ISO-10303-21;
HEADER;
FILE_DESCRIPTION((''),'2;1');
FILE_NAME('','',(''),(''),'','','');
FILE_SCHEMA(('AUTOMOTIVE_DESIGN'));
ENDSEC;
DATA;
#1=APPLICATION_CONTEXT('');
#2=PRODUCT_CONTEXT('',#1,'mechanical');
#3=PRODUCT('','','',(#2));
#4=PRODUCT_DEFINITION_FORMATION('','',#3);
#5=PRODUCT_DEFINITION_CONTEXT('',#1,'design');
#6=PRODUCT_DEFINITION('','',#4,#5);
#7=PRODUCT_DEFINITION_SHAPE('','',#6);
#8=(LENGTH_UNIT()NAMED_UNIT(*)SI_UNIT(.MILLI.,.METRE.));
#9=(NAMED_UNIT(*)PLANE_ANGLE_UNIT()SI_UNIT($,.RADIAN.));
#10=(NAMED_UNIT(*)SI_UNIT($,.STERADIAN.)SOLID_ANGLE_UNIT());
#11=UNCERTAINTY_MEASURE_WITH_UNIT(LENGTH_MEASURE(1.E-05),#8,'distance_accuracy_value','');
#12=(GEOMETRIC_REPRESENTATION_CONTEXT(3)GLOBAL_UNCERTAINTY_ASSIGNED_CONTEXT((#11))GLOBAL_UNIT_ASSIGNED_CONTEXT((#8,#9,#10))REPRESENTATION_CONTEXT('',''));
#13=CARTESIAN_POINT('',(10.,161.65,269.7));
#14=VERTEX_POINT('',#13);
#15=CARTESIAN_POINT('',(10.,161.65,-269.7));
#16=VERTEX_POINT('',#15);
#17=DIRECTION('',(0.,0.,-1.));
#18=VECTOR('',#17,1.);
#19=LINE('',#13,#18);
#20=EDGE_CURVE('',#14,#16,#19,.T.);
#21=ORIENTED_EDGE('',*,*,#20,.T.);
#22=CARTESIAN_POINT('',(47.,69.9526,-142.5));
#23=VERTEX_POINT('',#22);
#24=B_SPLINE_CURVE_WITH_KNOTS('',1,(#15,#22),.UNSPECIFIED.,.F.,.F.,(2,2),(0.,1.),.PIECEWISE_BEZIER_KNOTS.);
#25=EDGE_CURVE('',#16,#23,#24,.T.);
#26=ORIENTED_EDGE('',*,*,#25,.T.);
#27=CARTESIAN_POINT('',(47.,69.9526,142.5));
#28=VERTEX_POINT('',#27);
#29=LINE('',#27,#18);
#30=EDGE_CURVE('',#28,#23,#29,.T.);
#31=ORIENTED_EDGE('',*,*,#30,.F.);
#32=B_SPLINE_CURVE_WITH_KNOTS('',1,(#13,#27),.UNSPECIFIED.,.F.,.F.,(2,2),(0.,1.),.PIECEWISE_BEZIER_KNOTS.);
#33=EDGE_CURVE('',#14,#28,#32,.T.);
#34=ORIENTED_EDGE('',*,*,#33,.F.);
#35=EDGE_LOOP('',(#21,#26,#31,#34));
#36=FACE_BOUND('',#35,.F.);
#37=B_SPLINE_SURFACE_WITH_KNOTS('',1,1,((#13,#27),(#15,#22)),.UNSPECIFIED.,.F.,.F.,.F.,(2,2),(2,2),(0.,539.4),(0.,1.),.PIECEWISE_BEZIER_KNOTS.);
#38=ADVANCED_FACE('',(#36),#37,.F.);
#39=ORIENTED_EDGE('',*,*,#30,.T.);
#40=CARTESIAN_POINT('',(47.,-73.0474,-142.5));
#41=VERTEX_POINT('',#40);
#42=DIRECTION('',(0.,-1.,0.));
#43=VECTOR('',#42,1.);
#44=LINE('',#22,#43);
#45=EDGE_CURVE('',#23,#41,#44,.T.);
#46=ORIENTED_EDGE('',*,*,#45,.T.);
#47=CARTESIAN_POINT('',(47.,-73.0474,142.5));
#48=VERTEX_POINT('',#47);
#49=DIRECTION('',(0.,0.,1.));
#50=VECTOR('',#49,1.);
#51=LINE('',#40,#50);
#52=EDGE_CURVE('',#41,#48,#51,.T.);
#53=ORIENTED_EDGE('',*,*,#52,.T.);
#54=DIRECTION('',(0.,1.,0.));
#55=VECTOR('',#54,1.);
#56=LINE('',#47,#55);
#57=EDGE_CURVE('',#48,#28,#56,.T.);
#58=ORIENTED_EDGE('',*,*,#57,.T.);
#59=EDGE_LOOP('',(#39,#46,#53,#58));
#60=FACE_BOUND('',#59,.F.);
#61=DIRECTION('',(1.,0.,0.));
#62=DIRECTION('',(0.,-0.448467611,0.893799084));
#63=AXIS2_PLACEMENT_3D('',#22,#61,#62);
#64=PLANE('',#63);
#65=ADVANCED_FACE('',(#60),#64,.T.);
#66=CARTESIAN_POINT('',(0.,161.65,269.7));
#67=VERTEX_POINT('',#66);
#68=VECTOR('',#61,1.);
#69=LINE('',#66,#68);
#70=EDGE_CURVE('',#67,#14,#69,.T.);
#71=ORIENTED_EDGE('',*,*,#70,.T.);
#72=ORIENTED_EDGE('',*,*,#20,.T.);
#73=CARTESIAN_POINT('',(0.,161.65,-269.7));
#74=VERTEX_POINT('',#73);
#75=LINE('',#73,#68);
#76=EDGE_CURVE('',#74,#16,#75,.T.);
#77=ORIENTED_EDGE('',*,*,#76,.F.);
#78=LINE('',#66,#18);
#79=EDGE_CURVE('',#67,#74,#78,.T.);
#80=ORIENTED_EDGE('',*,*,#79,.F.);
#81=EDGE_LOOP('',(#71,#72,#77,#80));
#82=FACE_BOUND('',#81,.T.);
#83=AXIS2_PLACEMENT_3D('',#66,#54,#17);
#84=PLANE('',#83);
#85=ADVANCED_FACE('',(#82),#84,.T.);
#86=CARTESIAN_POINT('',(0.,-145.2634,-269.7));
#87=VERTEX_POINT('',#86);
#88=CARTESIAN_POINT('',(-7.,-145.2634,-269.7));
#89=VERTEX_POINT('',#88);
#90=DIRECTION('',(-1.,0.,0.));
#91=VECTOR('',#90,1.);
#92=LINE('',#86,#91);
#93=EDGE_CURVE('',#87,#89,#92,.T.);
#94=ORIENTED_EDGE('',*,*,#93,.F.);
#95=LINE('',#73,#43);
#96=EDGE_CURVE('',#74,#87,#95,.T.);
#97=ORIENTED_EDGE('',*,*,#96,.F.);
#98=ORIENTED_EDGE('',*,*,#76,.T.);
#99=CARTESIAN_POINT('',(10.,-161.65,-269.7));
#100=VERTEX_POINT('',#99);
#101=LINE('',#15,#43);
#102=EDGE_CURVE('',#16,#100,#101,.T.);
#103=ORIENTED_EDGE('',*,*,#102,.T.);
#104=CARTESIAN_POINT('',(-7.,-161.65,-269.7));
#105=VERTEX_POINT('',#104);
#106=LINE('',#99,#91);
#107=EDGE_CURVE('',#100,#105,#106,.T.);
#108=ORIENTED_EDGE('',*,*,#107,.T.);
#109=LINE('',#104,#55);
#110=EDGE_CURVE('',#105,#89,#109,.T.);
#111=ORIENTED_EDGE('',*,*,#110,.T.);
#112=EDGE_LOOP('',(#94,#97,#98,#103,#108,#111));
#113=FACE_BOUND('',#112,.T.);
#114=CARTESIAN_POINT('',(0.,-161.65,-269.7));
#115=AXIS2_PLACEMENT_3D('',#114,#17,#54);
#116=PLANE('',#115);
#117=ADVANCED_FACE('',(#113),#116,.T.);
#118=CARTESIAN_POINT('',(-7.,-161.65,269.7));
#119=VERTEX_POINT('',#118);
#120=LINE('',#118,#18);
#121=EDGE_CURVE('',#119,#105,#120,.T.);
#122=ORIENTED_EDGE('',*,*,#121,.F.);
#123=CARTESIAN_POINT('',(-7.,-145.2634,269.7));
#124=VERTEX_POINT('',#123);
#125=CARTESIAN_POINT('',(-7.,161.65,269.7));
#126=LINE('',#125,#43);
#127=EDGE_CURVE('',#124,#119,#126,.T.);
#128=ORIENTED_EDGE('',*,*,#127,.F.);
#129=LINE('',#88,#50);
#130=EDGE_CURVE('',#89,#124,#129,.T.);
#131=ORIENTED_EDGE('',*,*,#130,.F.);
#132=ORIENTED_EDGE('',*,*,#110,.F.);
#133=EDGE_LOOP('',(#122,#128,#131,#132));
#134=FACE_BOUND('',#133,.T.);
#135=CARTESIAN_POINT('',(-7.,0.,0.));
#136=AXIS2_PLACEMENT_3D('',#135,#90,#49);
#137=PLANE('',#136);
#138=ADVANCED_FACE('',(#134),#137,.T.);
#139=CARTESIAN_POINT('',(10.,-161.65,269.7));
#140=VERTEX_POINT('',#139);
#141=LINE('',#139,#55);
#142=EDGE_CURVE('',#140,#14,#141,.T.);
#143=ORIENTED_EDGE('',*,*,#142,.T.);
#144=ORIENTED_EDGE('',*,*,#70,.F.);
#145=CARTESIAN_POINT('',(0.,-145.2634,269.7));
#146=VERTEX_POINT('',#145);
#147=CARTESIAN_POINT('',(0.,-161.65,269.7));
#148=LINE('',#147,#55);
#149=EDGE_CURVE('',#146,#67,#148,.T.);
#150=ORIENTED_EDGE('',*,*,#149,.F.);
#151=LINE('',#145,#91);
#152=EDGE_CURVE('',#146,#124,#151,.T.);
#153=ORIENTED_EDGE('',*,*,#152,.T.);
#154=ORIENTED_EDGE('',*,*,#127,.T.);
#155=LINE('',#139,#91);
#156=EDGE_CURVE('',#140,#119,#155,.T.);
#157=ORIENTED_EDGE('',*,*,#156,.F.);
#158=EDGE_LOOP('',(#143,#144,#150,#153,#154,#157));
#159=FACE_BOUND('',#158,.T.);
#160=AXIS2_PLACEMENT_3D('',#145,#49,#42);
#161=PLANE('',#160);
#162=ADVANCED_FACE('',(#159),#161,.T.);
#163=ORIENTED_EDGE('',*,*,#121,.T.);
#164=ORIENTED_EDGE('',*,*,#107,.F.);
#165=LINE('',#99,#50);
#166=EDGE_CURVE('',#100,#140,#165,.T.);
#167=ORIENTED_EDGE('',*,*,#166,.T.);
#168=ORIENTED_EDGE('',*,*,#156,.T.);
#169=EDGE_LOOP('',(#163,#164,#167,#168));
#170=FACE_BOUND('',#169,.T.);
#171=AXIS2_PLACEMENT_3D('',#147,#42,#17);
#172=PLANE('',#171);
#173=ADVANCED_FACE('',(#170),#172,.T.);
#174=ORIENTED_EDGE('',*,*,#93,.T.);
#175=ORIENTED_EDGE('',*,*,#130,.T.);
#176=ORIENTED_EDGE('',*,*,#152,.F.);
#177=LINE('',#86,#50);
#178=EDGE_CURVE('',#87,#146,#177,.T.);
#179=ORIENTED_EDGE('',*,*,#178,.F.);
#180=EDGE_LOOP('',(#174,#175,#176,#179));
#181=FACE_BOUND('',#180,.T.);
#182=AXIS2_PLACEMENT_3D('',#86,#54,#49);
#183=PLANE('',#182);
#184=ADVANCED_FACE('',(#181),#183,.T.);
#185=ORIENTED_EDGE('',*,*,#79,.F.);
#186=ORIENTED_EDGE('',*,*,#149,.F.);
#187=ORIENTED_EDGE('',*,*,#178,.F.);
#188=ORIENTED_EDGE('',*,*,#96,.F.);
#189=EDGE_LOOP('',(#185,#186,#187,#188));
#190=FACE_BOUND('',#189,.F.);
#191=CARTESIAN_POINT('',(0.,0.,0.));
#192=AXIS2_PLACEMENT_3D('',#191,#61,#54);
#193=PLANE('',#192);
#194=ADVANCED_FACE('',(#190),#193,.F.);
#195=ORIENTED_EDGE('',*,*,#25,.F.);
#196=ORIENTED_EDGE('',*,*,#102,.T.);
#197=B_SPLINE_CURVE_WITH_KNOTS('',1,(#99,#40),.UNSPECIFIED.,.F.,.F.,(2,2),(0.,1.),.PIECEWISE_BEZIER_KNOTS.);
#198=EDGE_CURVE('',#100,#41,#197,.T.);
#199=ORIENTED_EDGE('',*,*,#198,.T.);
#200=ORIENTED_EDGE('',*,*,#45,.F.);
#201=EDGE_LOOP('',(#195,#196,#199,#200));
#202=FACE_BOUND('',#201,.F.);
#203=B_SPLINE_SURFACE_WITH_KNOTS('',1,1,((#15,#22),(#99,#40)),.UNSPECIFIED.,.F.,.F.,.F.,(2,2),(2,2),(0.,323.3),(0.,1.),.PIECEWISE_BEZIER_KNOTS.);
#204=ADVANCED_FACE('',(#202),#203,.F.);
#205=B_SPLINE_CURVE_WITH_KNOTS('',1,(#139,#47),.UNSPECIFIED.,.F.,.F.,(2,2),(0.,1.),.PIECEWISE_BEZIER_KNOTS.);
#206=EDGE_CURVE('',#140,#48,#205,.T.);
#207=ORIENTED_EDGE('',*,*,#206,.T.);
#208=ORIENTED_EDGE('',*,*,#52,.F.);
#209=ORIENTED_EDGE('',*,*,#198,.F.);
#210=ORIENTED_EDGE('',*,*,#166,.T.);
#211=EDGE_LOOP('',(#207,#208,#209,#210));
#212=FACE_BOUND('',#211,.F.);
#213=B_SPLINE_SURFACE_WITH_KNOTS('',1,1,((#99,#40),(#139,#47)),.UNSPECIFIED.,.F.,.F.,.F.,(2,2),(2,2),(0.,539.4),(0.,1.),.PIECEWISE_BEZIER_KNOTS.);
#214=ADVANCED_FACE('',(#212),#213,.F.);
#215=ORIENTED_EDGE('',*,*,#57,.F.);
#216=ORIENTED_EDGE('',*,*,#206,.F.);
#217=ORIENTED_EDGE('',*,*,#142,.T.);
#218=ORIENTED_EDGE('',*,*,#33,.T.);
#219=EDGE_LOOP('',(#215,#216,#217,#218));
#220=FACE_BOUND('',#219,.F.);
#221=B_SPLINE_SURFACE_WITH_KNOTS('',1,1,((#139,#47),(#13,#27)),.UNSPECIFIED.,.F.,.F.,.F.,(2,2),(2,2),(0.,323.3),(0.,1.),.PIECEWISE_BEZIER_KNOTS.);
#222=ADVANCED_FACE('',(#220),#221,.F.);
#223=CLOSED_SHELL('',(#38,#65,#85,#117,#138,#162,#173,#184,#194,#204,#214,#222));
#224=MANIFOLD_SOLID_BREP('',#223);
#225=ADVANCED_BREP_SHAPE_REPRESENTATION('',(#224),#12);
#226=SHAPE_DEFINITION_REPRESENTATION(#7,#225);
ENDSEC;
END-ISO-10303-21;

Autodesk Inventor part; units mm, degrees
ref_plane "YZ Plane" through (0, 0, 0) normal (1, 0, 0) x (0, 1, 0)
ref_plane "XZ Plane" through (0, 0, 0) normal (0, 1, 0) x (-1, 0, 0)
sketch "Sketch1" plane through (0, 0, 0) normal (1, 0, 0) x (0, 1, 0)
  line L0 (-161.65, 269.7) -> (161.65, 269.7)
  line L1 (161.65, 269.7) -> (161.65, -269.7)
  line L2 (161.65, -269.7) -> (-161.65, -269.7)
  line L3 (-161.65, -269.7) -> (-161.65, 269.7)
  line L4 (-161.65, 269.7) -> (161.65, -269.7) construction
  line L5 (161.65, 269.7) -> (-161.65, -269.7) construction
  point P0 (0, 0)
  dimension "d0" = 323.3
  dimension "d1" = 539.4
extrude "Extrusion1" add sketch "Sketch1" along normal blind 10
ref_plane "Work Plane1" through (47, 0, 0) normal (1, 0, 0) x (0, 0, -1)
sketch "Sketch2" plane through (47, 0, 0) normal (1, 0, 0) x (0, 0, -1)
  line L0 (-142.5, 69.9526) -> (142.5, 69.9526)
  line L1 (142.5, 69.9526) -> (142.5, -73.0474)
  line L2 (142.5, -73.0474) -> (-142.5, -73.0474)
  line L3 (-142.5, -73.0474) -> (-142.5, 69.9526)
  line L4 (-142.5, 69.9526) -> (142.5, -73.0474) construction
  line L5 (142.5, 69.9526) -> (-142.5, -73.0474) construction
  point P0 (0, 0)
  point P1 (0, -1.5474)
  dimension "d5" = 285
  dimension "d6" = 143
sketch "Sketch3" plane through (10, 0, 0) normal (1, 0, 0) x (0, 0, -1)
  line L0 (269.7, -161.65) -> (269.7, 161.65) projected
  line L1 (269.7, 161.65) -> (-269.7, 161.65) projected
  line L2 (-269.7, 161.65) -> (-269.7, -161.65) projected
  line L3 (-269.7, -161.65) -> (269.7, -161.65) projected
  point P0 (0, 0)
loft "Loft1" add profiles "Sketch2" section 1 edges at (10, 0, -269.7) (10, 161.65, 0) (10, 0, 269.7) (10, -161.65, 0)
sketch "Sketch4" plane through (0, 0, 0) normal (-1, 0, 0) x (0, 0, 1)
  line L0 (-269.7, -161.65) -> (-269.7, 161.65) projected
  line L1 (269.7, -161.65) -> (-269.7, -161.65) projected
  line L2 (269.7, 161.65) -> (269.7, -161.65) projected
  line L3 (-269.7, 161.65) -> (269.7, 161.65) projected
  line L4 (-269.7, -161.65) -> (-269.7, 161.65) projected
  line L5 (-269.7, -145.2634) -> (269.7, -145.2634)
  point P0 (0, 0)
extrude "Extrusion2" add sketch "Sketch4" along normal blind 7 contours L0 L5 L2 L1
properties part number "PANTALLA" material "Steel, Mild, Welded"
